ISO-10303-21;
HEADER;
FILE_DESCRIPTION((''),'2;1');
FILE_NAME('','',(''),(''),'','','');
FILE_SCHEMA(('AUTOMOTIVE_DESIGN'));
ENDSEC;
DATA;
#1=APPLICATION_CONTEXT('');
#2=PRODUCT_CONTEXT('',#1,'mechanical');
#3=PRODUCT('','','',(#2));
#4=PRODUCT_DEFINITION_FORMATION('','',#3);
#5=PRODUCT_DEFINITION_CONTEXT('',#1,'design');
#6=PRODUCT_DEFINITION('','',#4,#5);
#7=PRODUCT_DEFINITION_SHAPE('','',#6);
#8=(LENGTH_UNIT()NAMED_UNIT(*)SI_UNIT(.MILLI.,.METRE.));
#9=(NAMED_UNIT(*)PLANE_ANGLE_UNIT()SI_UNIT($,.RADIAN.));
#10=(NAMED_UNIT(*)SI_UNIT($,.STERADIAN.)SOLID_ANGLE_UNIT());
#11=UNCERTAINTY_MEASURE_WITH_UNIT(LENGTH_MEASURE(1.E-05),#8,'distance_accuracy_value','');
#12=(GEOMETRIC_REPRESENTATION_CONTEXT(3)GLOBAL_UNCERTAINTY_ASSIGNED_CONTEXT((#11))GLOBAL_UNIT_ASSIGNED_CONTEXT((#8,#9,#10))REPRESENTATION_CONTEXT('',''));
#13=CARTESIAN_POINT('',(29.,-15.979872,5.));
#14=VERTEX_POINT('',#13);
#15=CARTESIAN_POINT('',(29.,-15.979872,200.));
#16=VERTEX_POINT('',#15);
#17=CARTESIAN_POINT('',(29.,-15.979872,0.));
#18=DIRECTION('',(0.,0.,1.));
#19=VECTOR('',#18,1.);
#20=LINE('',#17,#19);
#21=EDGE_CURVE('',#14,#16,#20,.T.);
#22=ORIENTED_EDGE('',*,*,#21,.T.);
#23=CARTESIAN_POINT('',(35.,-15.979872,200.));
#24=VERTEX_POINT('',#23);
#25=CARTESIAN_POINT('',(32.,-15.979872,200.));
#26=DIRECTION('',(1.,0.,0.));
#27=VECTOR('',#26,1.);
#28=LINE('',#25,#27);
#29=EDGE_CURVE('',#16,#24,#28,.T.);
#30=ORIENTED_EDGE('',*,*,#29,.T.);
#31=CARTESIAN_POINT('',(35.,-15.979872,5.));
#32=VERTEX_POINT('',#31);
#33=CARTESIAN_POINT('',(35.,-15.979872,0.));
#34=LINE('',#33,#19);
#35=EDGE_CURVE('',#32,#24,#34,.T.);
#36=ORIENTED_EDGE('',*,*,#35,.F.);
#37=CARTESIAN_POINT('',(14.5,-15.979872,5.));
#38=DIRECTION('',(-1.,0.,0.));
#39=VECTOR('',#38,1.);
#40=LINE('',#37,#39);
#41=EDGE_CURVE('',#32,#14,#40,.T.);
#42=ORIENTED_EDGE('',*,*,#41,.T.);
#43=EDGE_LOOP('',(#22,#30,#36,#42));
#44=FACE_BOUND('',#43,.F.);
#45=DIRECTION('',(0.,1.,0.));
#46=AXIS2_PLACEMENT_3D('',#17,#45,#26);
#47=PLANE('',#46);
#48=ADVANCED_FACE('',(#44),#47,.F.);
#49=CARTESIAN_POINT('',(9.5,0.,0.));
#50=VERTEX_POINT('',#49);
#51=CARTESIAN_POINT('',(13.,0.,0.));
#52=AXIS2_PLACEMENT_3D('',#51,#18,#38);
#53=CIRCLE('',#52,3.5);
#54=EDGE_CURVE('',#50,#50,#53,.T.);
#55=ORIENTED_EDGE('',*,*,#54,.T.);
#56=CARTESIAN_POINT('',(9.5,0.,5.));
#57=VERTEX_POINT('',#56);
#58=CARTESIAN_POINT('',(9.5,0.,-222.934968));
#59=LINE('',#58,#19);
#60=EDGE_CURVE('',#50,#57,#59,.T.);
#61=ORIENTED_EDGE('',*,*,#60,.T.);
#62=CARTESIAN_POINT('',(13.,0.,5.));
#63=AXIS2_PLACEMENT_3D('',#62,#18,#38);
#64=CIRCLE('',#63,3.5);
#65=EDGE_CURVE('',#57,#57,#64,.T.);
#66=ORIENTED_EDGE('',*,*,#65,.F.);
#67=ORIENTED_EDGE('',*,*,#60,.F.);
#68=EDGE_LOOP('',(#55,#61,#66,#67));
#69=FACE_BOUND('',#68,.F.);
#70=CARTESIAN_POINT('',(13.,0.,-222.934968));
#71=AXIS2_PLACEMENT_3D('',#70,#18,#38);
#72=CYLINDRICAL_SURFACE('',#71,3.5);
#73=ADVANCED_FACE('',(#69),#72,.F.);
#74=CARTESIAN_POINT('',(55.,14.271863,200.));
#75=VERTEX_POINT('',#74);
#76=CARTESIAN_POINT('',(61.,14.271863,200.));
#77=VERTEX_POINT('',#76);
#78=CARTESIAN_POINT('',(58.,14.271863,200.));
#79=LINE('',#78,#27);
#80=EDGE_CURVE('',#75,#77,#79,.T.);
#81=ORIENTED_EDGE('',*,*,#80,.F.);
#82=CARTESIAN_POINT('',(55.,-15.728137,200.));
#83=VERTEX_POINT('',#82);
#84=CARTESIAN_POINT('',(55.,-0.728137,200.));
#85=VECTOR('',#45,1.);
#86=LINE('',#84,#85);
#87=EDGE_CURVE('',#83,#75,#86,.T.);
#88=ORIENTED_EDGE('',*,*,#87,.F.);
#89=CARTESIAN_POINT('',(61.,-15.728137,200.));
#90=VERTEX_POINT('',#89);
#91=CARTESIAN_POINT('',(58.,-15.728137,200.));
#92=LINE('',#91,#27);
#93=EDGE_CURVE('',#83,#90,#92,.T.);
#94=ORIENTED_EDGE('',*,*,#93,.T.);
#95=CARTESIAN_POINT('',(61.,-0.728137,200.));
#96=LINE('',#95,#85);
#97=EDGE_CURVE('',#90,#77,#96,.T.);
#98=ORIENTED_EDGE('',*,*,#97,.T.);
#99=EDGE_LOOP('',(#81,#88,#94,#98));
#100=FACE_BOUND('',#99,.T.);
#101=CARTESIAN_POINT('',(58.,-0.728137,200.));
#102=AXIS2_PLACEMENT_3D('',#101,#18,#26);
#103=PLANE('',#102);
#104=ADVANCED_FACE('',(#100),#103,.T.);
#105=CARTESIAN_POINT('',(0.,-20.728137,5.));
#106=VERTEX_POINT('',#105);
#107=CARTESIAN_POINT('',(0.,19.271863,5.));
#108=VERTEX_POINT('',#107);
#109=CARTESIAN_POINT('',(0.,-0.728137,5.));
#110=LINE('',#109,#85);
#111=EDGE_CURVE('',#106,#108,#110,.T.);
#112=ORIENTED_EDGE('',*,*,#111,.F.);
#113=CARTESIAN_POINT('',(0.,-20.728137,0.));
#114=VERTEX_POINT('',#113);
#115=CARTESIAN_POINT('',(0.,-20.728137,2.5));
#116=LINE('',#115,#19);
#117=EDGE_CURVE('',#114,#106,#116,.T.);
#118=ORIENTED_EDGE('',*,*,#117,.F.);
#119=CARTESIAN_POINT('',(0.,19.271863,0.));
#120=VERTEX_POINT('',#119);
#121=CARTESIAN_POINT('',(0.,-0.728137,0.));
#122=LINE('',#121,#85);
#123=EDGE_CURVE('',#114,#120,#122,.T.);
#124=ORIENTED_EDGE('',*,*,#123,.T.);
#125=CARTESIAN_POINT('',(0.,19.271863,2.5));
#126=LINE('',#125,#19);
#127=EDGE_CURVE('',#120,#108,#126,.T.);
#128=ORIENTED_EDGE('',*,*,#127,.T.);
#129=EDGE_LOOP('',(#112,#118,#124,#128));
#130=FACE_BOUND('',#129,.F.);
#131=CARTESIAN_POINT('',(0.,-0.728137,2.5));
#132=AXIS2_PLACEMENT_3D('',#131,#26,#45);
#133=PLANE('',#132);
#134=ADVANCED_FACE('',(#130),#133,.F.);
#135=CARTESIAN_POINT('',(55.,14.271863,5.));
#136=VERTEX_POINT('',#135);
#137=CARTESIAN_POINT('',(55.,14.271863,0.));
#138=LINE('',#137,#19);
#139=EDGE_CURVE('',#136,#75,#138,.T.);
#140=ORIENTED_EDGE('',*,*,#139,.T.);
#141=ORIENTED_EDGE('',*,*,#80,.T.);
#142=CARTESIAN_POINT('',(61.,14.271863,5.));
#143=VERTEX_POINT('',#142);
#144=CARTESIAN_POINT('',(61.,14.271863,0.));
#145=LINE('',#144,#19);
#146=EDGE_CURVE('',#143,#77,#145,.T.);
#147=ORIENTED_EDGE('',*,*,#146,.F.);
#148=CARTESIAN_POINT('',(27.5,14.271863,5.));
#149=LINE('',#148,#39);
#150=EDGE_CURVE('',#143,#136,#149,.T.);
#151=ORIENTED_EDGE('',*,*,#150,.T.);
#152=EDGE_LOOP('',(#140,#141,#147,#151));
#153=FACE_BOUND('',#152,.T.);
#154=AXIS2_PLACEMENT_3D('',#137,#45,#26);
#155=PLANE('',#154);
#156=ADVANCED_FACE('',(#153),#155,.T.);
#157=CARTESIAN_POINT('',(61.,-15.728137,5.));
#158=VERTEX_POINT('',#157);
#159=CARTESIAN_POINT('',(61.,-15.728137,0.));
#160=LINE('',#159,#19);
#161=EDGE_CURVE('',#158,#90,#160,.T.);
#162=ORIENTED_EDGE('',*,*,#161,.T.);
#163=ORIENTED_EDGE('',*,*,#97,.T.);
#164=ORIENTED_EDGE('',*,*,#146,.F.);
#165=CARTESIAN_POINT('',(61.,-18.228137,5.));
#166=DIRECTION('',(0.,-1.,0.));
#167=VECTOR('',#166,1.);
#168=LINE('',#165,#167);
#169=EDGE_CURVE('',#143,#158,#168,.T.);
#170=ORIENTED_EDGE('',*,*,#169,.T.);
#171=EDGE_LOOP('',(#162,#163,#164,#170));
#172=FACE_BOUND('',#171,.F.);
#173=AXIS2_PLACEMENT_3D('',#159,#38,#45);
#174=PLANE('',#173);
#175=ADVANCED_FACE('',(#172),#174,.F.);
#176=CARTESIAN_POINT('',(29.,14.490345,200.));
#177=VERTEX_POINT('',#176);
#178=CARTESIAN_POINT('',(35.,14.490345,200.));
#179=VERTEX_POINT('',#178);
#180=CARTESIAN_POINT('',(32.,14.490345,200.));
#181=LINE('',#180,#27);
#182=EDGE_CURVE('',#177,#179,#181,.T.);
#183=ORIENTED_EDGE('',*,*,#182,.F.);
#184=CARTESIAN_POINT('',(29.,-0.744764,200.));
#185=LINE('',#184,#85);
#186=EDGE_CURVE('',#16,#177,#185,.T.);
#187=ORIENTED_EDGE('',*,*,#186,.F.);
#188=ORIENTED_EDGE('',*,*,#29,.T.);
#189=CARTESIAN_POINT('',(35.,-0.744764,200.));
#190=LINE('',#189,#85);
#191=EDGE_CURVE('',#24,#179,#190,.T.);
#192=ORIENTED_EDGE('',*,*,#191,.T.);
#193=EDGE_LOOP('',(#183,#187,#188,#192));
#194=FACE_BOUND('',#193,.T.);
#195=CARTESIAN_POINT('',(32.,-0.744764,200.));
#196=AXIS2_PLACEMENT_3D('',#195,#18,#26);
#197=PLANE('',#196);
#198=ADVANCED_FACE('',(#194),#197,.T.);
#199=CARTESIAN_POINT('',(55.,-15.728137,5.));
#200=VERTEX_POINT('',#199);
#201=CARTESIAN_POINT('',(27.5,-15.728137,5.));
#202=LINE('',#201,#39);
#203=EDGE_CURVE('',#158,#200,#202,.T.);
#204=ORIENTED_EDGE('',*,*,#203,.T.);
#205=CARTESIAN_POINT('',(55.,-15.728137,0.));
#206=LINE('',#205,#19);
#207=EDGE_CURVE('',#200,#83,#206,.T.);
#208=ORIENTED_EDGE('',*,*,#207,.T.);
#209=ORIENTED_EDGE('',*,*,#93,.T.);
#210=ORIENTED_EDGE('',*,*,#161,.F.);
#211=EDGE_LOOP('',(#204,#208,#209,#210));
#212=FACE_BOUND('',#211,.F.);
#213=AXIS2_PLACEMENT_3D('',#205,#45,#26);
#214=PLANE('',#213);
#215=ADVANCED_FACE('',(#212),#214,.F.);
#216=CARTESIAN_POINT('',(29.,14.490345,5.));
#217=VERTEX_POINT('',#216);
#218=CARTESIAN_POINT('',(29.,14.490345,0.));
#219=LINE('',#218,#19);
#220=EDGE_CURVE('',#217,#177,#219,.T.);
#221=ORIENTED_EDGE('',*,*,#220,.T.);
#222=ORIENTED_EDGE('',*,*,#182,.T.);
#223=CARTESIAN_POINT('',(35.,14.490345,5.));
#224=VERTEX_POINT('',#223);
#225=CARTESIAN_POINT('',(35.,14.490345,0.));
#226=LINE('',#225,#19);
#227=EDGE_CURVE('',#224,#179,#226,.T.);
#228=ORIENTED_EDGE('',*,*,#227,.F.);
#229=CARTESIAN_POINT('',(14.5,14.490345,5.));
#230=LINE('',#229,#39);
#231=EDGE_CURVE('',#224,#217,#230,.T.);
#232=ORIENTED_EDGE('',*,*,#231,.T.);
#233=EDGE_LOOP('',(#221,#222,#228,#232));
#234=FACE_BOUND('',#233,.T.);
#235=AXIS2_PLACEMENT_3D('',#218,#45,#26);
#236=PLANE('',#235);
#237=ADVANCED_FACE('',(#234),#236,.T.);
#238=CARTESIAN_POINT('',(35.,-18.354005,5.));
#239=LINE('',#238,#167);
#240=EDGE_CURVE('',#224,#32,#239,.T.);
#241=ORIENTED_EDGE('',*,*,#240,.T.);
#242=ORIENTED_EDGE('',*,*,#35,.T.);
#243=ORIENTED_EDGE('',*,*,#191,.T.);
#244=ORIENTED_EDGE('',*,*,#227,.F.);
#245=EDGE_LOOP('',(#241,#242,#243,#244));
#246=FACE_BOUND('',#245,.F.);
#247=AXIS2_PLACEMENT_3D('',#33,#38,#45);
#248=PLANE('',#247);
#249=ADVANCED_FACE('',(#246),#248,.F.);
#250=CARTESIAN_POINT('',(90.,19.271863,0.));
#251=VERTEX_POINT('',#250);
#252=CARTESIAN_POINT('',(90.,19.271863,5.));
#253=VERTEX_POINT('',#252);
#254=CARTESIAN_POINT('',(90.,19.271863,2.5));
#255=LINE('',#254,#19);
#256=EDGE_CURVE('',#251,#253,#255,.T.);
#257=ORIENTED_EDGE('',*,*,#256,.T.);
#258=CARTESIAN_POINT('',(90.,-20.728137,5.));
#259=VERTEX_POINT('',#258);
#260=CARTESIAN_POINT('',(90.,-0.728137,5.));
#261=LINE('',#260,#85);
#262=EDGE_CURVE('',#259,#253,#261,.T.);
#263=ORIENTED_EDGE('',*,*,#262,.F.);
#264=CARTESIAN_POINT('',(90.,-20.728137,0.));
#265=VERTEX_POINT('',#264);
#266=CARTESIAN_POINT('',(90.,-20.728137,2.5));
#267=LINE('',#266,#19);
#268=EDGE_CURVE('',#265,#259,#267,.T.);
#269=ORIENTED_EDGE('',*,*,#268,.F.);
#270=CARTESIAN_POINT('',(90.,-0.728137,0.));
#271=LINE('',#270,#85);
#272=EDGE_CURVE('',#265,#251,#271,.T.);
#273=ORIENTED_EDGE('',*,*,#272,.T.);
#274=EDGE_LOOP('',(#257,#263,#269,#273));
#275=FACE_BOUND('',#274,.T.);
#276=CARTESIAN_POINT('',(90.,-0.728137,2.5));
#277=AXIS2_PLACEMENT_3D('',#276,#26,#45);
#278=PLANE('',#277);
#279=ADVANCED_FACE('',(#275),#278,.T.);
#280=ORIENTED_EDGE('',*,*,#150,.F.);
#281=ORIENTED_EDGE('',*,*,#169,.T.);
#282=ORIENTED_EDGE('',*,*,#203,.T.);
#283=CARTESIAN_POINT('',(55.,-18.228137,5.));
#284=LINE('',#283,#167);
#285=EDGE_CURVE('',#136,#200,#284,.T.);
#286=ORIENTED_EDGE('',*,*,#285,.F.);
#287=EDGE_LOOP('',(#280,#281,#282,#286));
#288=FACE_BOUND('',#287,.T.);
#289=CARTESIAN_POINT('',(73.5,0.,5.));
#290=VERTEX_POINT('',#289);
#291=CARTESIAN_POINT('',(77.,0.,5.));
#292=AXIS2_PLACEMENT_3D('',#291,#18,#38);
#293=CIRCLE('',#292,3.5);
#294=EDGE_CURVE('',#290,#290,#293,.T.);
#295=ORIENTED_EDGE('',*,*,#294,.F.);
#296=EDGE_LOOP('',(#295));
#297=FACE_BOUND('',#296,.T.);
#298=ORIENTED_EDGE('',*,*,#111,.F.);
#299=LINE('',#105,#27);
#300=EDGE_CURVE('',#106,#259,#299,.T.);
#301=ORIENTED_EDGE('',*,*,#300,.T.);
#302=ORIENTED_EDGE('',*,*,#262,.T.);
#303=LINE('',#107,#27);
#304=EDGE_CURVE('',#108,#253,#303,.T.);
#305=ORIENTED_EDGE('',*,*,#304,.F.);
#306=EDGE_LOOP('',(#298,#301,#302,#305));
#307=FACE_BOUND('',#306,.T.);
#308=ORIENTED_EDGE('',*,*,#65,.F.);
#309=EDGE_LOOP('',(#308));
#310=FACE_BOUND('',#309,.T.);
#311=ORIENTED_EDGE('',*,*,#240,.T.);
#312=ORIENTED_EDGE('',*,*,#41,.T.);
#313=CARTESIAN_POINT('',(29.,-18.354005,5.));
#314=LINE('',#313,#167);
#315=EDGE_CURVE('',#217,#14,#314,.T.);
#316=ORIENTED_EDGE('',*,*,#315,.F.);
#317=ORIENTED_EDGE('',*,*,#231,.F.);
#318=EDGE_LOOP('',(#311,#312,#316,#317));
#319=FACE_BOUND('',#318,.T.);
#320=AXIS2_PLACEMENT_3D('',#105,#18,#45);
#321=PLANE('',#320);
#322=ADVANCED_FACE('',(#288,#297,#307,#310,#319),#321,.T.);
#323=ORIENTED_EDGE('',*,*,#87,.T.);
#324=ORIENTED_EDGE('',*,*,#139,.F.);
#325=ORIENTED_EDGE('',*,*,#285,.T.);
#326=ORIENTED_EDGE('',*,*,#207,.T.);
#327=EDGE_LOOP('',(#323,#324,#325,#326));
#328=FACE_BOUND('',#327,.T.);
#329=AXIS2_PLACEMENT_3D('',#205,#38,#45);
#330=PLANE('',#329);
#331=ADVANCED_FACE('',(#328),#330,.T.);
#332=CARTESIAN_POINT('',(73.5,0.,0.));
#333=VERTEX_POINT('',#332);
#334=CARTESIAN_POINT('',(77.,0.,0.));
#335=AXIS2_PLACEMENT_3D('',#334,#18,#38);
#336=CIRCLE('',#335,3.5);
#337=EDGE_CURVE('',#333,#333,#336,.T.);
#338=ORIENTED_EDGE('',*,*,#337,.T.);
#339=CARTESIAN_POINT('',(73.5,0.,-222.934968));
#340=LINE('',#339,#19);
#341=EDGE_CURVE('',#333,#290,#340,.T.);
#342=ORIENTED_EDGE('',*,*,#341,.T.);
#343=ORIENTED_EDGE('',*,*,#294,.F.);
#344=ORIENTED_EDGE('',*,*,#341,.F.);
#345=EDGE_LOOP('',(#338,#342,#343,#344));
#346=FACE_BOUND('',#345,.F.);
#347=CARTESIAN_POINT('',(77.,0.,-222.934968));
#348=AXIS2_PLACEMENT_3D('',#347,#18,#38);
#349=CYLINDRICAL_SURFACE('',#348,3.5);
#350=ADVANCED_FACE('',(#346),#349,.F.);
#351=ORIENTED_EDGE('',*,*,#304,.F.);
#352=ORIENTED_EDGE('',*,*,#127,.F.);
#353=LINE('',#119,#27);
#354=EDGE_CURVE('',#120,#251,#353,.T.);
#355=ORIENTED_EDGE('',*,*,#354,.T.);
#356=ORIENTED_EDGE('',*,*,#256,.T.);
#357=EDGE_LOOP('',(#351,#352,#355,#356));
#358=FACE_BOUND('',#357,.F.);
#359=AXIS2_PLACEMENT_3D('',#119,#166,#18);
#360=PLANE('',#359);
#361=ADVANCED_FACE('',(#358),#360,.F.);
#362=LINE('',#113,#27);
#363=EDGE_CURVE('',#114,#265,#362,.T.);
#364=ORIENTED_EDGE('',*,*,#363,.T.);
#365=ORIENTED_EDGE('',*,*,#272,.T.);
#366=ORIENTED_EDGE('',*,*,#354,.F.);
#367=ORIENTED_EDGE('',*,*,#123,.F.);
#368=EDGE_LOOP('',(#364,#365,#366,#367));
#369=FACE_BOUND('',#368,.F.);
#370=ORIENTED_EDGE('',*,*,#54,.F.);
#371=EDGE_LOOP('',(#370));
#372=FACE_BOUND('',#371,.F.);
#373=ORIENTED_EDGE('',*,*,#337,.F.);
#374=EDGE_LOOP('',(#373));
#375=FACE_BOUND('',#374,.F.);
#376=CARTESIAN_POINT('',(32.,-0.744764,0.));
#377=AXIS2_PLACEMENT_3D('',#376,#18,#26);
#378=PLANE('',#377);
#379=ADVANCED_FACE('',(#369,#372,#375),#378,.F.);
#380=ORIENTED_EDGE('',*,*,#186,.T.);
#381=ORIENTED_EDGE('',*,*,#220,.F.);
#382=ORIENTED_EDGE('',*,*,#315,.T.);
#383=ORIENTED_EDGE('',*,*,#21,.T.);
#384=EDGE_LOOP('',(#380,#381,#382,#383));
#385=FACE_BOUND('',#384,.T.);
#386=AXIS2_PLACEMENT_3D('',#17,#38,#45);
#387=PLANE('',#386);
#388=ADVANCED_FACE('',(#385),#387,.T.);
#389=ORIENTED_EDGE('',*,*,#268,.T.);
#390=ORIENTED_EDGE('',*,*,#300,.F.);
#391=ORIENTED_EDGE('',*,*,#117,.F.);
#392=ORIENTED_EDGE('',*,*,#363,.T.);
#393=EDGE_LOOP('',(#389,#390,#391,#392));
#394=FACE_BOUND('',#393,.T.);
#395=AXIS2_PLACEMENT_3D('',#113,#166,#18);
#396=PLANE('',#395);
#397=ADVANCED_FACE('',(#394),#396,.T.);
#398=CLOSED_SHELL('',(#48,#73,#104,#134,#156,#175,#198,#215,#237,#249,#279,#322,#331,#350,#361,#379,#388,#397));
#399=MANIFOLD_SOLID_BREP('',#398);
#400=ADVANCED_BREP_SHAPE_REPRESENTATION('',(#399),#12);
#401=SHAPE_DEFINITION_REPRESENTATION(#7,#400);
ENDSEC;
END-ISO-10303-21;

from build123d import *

# Parameters (mm, degrees)
F0_W     = 40
F0_H     = 5
F1_DEPTH = 90
F2_W     = 6
F2_H     = 30.4702166427
F2_H_2   = 30
F3_DEPTH = 200
F5_D     = 7


# Not quite as in the source:
# - a feature names something its author has since deleted; it is built from what else it names


with BuildPart() as f1:
    # F0 (on Right) → F1 (new body)
    with BuildSketch(Plane.YZ):
        with Locations((-0.72813743, 2.5)):
            Rectangle(F0_W, F0_H)
    extrude(amount=F1_DEPTH)

    # F2 (on Top) → F3 (join)
    with BuildSketch(Plane.XY):
        with Locations((32, -0.7447636027)):
            Rectangle(F2_W, F2_H)
        with Locations((58, -0.72813743)):
            Rectangle(F2_W, F2_H_2)
    extrude(amount=F3_DEPTH)

    # F5 (through all)
    with Locations(Plane(origin=(0, 0, 0), x_dir=(1, 0, 0), z_dir=(0, 0, -1))):
        with Locations((13, 0), (77, 0)):
            Hole(F5_D / 2)


solid = f1.part
